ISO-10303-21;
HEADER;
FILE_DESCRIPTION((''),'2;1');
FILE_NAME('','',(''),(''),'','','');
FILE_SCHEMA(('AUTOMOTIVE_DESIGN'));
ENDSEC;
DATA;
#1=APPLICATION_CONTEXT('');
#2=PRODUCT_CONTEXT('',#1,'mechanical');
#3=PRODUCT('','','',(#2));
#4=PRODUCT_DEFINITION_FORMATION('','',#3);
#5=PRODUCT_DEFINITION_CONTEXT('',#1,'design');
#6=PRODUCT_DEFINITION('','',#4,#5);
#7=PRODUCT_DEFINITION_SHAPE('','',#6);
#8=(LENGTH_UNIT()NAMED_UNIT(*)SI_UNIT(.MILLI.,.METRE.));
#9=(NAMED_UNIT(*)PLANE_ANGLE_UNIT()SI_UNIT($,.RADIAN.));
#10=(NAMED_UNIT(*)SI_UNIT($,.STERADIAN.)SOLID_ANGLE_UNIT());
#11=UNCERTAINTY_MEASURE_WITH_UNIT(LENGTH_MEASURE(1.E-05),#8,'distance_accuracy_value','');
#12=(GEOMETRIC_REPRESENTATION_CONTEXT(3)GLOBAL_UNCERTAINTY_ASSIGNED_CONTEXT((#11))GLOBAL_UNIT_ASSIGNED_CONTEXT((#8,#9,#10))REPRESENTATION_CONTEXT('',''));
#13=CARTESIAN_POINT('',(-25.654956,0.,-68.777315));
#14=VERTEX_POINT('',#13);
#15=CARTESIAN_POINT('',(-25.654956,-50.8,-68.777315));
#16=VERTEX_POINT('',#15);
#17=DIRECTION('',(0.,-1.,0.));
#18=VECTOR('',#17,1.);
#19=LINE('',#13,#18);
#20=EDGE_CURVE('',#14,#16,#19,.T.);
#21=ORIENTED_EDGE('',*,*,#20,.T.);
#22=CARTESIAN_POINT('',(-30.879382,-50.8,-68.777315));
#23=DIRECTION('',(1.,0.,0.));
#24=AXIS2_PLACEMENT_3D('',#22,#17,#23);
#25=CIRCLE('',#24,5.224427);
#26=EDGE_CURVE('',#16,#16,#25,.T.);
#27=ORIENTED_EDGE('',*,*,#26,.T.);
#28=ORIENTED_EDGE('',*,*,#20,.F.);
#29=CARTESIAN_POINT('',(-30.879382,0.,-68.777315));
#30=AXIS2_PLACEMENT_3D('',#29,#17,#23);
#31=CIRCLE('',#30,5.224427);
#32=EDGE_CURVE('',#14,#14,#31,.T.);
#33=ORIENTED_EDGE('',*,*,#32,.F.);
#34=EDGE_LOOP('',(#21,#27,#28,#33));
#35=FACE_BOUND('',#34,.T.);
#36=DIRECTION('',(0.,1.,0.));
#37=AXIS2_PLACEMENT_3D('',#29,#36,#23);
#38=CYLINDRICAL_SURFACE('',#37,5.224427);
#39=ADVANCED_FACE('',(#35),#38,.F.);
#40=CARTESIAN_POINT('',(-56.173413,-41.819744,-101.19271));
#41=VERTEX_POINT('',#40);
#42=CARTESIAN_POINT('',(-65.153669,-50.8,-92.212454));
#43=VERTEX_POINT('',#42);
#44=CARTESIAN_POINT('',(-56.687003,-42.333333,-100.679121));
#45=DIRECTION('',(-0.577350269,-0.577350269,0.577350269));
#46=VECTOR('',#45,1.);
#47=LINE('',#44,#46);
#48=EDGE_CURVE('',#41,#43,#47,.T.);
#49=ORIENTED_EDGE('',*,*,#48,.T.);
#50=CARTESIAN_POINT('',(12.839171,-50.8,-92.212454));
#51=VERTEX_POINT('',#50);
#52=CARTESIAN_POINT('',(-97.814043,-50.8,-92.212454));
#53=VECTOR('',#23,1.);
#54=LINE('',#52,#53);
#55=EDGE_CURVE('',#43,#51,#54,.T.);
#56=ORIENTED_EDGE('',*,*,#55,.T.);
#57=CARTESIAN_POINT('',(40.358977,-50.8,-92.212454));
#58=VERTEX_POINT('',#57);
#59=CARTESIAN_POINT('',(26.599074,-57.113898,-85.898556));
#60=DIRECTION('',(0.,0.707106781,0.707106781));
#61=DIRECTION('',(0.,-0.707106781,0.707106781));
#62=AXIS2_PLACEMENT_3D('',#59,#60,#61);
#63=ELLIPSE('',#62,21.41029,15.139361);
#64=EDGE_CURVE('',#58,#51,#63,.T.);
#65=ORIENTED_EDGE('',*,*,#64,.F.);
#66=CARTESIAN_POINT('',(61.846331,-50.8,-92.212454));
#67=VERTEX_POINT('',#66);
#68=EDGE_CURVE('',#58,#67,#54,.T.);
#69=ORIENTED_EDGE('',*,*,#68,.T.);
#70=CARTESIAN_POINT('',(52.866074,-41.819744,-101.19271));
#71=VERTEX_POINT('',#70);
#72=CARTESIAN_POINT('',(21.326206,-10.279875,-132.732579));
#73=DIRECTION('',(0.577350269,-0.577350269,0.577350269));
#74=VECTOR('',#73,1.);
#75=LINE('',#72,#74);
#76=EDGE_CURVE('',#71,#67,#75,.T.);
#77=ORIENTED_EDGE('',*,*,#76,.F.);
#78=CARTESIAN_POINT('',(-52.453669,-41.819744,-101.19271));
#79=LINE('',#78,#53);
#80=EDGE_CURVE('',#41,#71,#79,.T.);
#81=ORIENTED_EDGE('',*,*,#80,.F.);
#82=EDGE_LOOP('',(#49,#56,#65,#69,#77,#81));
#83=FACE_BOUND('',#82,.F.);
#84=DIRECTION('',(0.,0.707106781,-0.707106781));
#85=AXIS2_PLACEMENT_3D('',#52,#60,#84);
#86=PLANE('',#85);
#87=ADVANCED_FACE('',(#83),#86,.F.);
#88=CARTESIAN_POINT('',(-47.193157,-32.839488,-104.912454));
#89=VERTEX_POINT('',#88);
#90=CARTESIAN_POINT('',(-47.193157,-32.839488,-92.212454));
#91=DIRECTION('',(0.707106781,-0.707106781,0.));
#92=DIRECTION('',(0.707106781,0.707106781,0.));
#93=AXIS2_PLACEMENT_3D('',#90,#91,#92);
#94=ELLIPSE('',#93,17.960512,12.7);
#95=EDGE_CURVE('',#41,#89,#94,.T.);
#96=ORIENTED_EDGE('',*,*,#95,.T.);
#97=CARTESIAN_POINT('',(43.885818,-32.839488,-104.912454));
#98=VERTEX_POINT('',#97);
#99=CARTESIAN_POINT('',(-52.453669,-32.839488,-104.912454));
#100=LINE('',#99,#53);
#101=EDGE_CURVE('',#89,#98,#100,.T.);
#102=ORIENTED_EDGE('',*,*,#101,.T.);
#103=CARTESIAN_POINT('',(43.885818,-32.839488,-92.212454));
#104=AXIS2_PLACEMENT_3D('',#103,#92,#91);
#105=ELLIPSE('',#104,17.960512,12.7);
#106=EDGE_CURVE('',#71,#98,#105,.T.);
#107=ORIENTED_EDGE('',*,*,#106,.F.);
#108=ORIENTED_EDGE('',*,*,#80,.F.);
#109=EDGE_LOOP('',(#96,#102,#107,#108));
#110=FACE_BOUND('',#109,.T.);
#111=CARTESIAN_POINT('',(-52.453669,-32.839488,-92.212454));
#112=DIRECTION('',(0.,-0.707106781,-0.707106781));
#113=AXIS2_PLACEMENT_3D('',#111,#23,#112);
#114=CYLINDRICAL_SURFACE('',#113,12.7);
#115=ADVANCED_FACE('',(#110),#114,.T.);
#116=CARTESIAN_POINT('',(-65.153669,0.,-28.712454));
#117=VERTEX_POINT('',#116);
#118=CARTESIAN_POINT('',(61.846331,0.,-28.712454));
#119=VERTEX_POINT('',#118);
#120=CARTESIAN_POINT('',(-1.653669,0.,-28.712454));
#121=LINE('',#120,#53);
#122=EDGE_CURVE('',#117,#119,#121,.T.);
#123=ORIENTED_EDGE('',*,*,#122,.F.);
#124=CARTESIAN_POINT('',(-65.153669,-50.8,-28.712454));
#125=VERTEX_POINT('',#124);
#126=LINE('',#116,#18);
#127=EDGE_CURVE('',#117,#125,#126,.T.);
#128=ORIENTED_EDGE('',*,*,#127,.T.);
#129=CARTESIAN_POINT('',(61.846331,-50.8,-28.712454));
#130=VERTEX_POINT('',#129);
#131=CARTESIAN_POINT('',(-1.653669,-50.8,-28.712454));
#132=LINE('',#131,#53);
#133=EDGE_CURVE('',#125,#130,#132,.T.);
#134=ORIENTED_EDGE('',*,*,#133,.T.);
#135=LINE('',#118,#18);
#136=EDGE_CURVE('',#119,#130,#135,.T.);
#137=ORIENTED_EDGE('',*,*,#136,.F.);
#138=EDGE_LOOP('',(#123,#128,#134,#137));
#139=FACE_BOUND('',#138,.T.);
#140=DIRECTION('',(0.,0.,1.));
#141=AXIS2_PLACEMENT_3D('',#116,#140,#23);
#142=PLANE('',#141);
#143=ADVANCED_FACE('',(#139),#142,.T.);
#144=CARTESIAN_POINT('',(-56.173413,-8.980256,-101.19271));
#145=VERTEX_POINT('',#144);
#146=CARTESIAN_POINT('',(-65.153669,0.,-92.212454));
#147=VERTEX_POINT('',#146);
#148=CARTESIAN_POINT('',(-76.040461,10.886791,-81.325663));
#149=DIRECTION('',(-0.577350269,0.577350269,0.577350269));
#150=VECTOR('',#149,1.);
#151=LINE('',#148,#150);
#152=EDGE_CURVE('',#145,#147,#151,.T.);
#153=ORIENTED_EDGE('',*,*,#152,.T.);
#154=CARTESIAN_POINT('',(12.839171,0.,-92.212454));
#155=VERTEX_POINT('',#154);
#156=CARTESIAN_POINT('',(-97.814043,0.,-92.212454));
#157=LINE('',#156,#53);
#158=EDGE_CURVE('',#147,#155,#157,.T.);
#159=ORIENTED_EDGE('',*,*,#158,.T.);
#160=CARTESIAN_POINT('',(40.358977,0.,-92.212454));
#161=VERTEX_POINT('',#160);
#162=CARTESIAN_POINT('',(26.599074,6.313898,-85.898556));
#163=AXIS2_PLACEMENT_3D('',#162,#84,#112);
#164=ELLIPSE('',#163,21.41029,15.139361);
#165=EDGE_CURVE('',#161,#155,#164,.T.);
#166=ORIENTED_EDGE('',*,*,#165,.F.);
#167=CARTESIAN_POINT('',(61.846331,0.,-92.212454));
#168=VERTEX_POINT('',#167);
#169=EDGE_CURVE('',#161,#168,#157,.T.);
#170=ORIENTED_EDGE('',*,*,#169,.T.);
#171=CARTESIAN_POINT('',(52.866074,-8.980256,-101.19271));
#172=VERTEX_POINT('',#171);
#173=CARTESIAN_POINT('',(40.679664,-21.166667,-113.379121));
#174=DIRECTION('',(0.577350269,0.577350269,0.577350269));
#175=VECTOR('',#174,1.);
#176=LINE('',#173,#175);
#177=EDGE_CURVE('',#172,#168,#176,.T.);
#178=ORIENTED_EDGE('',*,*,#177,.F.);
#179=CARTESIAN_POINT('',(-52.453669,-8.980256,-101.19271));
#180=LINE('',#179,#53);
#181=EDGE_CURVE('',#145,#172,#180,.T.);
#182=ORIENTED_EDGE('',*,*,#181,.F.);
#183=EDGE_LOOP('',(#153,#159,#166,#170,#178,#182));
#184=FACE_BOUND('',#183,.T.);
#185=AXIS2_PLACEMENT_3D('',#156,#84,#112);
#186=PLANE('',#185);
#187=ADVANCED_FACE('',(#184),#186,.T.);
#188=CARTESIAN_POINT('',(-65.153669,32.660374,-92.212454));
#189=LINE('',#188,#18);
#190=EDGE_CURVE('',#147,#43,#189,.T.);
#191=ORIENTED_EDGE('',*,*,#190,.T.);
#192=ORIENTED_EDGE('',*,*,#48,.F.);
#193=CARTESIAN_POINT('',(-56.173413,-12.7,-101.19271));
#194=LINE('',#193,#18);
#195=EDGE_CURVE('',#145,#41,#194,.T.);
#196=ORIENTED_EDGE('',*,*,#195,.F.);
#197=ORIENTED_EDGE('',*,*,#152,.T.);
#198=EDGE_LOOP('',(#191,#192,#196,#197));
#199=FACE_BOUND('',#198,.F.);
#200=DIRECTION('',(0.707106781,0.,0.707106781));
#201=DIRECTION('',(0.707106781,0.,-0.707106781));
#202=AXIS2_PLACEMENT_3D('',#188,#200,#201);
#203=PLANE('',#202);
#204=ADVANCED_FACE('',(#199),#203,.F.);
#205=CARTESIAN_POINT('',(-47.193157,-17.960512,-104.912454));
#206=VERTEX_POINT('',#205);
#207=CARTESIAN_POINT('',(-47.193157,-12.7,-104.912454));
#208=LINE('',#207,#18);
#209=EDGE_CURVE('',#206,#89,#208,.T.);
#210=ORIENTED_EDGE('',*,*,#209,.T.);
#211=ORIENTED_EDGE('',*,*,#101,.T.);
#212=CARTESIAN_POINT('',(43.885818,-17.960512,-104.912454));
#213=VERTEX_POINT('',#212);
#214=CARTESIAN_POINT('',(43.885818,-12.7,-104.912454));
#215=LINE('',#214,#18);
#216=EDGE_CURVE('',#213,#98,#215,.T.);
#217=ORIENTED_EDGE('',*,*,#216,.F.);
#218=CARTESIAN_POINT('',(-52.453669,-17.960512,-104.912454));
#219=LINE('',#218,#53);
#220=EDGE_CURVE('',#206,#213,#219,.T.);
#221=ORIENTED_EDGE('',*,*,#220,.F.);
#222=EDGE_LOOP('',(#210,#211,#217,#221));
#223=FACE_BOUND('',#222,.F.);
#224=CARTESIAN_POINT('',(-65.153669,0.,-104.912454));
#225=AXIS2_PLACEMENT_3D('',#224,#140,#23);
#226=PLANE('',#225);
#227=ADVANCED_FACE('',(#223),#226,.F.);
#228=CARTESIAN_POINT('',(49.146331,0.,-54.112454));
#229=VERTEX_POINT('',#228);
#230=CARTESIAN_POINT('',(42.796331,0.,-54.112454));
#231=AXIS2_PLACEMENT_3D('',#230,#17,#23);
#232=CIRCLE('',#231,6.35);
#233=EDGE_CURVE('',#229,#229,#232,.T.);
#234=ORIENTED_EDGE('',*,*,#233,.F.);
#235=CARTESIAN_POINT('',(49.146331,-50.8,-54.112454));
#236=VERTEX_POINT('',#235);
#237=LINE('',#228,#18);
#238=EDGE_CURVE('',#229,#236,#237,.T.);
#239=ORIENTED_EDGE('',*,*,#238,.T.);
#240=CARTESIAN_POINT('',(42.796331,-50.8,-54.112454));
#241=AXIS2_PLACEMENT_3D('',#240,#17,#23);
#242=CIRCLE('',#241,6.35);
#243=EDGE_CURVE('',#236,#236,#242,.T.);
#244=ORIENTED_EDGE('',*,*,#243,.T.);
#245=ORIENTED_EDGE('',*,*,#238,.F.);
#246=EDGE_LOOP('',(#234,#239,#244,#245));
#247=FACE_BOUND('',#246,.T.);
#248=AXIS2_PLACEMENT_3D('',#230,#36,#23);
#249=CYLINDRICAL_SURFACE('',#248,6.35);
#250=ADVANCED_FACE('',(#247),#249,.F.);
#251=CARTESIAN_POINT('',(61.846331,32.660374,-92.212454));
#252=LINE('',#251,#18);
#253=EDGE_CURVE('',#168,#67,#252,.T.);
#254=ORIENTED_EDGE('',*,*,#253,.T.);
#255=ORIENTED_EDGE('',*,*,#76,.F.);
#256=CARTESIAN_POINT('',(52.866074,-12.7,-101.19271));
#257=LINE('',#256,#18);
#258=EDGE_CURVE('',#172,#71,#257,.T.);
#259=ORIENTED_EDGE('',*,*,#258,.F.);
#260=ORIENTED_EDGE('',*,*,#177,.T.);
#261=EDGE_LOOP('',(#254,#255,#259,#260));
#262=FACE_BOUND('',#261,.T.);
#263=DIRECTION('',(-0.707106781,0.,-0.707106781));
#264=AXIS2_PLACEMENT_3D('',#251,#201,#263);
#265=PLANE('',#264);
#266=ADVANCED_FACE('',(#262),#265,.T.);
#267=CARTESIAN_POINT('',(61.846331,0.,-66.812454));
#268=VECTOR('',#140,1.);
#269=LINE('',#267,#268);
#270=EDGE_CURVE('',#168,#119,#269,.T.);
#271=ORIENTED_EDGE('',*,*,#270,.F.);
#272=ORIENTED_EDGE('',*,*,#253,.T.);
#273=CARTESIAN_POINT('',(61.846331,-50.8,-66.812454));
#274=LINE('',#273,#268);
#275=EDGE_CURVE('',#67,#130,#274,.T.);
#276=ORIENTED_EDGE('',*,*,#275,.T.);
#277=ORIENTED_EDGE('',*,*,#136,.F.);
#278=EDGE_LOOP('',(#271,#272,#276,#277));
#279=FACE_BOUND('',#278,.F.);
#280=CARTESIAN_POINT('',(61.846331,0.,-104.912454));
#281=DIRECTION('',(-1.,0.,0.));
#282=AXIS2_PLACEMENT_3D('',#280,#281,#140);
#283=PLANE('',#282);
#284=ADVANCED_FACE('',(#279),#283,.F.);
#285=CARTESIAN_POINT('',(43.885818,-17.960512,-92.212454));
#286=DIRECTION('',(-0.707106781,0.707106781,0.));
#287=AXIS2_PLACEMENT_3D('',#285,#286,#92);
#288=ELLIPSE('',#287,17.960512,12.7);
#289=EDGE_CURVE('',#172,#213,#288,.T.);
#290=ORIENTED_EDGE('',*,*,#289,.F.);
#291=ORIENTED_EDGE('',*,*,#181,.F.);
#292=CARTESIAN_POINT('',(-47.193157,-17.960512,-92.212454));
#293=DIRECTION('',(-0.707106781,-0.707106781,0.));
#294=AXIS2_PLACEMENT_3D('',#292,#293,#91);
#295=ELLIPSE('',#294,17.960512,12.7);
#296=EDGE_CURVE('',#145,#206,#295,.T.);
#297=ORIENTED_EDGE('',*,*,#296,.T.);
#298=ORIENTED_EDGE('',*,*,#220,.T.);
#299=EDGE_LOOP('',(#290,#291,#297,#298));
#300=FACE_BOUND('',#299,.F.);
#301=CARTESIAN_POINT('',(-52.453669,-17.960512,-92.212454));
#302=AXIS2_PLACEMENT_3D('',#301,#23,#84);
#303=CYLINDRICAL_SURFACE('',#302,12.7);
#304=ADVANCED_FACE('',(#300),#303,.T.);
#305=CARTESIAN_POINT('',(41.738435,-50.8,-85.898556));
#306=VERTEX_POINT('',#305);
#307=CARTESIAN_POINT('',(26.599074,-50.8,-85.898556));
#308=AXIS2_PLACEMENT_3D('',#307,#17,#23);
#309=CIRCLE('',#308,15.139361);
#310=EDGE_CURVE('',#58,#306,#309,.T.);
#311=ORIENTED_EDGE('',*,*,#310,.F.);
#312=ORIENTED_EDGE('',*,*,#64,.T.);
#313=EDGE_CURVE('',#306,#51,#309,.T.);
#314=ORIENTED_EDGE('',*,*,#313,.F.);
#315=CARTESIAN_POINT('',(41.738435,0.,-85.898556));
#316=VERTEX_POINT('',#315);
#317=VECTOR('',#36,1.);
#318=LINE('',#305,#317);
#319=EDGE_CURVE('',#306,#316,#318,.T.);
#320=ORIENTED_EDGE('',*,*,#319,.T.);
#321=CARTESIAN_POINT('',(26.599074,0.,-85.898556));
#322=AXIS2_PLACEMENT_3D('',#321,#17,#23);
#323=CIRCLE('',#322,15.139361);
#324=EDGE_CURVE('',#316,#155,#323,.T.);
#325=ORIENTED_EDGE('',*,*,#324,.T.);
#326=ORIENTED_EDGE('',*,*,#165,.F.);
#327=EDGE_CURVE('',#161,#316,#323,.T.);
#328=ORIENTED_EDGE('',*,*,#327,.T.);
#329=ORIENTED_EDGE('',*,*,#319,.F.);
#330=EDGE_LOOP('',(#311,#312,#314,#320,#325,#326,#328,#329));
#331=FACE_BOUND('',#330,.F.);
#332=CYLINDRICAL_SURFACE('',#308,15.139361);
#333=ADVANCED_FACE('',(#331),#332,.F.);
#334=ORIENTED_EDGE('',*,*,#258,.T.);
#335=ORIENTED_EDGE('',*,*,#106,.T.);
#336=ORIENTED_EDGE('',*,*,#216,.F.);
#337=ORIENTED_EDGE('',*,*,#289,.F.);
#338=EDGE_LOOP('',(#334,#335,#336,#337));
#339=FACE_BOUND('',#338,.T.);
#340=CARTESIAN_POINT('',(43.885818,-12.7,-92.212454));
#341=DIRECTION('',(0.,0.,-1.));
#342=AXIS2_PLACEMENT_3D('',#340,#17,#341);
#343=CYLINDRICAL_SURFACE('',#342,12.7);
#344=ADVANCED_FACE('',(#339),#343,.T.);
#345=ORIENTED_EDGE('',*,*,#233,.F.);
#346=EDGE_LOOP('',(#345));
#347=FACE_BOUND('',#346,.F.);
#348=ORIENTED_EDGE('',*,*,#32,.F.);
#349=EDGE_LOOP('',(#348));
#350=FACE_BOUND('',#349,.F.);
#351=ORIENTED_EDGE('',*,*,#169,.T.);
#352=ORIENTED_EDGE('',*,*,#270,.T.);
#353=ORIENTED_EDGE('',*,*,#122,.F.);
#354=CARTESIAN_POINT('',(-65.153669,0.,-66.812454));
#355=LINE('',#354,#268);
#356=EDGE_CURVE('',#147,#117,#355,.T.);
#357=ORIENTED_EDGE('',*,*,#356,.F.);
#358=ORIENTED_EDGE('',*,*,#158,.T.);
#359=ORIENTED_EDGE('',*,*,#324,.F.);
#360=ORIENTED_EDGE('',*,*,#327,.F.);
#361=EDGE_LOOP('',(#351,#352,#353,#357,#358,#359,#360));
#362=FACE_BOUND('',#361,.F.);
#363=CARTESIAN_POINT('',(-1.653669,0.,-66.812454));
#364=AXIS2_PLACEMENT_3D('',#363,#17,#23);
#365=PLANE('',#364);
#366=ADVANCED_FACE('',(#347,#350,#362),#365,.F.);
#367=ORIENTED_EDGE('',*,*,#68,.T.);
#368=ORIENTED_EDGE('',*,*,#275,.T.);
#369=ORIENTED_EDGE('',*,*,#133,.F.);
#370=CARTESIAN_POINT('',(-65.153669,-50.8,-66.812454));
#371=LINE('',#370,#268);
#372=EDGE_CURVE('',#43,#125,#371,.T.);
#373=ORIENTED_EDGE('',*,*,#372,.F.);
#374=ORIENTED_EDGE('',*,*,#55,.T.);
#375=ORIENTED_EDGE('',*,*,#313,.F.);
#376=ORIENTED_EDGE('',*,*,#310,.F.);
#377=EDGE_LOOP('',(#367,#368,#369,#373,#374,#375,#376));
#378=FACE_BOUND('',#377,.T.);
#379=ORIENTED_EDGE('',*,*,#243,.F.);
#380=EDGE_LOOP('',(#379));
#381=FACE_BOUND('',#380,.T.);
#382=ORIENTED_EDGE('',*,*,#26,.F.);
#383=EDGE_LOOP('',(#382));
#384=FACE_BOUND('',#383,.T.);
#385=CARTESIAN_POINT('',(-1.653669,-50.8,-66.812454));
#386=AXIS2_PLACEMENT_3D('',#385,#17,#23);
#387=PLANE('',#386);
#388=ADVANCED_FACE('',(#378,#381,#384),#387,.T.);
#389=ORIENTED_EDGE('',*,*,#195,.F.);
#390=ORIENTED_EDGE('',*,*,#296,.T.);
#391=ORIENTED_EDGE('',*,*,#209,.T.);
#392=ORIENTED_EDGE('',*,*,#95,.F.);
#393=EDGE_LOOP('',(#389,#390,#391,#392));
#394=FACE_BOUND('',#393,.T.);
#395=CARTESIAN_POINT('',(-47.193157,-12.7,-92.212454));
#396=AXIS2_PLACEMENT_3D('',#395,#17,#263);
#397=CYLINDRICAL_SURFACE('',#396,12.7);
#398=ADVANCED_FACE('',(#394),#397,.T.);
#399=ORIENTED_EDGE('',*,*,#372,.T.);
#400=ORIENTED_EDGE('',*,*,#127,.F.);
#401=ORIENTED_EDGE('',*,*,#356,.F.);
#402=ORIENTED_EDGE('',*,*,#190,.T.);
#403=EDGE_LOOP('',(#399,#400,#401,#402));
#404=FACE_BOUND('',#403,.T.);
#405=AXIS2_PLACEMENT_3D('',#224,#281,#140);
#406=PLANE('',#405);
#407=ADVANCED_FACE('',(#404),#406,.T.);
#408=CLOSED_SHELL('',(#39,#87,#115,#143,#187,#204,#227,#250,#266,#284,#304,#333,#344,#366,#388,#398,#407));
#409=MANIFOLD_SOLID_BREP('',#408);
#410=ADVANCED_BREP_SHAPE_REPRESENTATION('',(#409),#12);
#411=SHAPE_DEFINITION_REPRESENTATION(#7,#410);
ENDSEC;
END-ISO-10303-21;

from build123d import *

# Parameters (mm, degrees)
F0_W        = 127
F0_H        = 76.2
F0_R        = 5.2244265331
F0_R_2      = 6.35
F1_DEPTH    = 50.8
F2_R        = 15.1393609574
F3_DEPTH    = 138.938
F4_T1_DEPTH = 116.1207478943
F4_T3_DEPTH = 192.3207478943
F5_R        = 12.7


# Not quite as in the source:
# - a fillet or chamfer that OpenCascade refuses, or shapes differently, is made with other operations: its cross-section is extruded or revolved along the edge and cut away or added


with BuildPart() as f1:
    # F0 (on Front) → F1 (new body)
    with BuildSketch(Plane.XZ):
        with Locations((-1.653669402, -66.8124542732)):
            Rectangle(F0_W, F0_H)
        with Locations((-30.8793820441, -68.7773153186)):
            Circle(F0_R, mode=Mode.SUBTRACT)
        with Locations((42.796330598, -54.1124542732)):
            Circle(F0_R_2, mode=Mode.SUBTRACT)
    extrude(amount=F1_DEPTH)

    # F2 (on face) → F3 (cut)
    with BuildSketch(Plane.XZ.offset(50.8)):
        with Locations((26.5990737826, -85.8985558152)):
            Circle(F2_R)
    extrude(amount=-F3_DEPTH, mode=Mode.SUBTRACT)

    # F4: chamfer of 12.7 on 4 edges, made by hand

    # F4_s2 → F4_t1 (cut)
    with BuildSketch(Plane.XZ.offset(-32.6603739472)):
        Polygon((61.846330598, -92.2124542732), (49.146330598, -104.9124542732), (61.846330598, -104.9124542732), align=None)
        Polygon((-65.153669402, -92.2124542732), (-52.453669402, -104.9124542732), (-65.153669402, -104.9124542732), align=None)
    extrude(amount=F4_T1_DEPTH, mode=Mode.SUBTRACT)

    # F4_s4 → F4_t3 (cut)
    with BuildSketch(Plane.YZ.offset(-97.8140433492)):
        Polygon((-50.8, -92.2124542732), (-38.1, -104.9124542732), (-50.8, -104.9124542732), align=None)
        Polygon((0, -92.2124542732), (-12.7, -104.9124542732), (0, -104.9124542732), align=None)
    extrude(amount=F4_T3_DEPTH, mode=Mode.SUBTRACT)

    # F5
    f5_edges = [f1.edges().sort_by_distance(p)[0] for p in [
        (-1.653669, -38.1, -104.912454),
        (-1.653669, -12.7, -104.912454),
        (49.146331, -25.4, -104.912454),
        (-52.453669, -25.4, -104.912454),
    ]]
    fillet(f5_edges, radius=F5_R)


solid = f1.part
